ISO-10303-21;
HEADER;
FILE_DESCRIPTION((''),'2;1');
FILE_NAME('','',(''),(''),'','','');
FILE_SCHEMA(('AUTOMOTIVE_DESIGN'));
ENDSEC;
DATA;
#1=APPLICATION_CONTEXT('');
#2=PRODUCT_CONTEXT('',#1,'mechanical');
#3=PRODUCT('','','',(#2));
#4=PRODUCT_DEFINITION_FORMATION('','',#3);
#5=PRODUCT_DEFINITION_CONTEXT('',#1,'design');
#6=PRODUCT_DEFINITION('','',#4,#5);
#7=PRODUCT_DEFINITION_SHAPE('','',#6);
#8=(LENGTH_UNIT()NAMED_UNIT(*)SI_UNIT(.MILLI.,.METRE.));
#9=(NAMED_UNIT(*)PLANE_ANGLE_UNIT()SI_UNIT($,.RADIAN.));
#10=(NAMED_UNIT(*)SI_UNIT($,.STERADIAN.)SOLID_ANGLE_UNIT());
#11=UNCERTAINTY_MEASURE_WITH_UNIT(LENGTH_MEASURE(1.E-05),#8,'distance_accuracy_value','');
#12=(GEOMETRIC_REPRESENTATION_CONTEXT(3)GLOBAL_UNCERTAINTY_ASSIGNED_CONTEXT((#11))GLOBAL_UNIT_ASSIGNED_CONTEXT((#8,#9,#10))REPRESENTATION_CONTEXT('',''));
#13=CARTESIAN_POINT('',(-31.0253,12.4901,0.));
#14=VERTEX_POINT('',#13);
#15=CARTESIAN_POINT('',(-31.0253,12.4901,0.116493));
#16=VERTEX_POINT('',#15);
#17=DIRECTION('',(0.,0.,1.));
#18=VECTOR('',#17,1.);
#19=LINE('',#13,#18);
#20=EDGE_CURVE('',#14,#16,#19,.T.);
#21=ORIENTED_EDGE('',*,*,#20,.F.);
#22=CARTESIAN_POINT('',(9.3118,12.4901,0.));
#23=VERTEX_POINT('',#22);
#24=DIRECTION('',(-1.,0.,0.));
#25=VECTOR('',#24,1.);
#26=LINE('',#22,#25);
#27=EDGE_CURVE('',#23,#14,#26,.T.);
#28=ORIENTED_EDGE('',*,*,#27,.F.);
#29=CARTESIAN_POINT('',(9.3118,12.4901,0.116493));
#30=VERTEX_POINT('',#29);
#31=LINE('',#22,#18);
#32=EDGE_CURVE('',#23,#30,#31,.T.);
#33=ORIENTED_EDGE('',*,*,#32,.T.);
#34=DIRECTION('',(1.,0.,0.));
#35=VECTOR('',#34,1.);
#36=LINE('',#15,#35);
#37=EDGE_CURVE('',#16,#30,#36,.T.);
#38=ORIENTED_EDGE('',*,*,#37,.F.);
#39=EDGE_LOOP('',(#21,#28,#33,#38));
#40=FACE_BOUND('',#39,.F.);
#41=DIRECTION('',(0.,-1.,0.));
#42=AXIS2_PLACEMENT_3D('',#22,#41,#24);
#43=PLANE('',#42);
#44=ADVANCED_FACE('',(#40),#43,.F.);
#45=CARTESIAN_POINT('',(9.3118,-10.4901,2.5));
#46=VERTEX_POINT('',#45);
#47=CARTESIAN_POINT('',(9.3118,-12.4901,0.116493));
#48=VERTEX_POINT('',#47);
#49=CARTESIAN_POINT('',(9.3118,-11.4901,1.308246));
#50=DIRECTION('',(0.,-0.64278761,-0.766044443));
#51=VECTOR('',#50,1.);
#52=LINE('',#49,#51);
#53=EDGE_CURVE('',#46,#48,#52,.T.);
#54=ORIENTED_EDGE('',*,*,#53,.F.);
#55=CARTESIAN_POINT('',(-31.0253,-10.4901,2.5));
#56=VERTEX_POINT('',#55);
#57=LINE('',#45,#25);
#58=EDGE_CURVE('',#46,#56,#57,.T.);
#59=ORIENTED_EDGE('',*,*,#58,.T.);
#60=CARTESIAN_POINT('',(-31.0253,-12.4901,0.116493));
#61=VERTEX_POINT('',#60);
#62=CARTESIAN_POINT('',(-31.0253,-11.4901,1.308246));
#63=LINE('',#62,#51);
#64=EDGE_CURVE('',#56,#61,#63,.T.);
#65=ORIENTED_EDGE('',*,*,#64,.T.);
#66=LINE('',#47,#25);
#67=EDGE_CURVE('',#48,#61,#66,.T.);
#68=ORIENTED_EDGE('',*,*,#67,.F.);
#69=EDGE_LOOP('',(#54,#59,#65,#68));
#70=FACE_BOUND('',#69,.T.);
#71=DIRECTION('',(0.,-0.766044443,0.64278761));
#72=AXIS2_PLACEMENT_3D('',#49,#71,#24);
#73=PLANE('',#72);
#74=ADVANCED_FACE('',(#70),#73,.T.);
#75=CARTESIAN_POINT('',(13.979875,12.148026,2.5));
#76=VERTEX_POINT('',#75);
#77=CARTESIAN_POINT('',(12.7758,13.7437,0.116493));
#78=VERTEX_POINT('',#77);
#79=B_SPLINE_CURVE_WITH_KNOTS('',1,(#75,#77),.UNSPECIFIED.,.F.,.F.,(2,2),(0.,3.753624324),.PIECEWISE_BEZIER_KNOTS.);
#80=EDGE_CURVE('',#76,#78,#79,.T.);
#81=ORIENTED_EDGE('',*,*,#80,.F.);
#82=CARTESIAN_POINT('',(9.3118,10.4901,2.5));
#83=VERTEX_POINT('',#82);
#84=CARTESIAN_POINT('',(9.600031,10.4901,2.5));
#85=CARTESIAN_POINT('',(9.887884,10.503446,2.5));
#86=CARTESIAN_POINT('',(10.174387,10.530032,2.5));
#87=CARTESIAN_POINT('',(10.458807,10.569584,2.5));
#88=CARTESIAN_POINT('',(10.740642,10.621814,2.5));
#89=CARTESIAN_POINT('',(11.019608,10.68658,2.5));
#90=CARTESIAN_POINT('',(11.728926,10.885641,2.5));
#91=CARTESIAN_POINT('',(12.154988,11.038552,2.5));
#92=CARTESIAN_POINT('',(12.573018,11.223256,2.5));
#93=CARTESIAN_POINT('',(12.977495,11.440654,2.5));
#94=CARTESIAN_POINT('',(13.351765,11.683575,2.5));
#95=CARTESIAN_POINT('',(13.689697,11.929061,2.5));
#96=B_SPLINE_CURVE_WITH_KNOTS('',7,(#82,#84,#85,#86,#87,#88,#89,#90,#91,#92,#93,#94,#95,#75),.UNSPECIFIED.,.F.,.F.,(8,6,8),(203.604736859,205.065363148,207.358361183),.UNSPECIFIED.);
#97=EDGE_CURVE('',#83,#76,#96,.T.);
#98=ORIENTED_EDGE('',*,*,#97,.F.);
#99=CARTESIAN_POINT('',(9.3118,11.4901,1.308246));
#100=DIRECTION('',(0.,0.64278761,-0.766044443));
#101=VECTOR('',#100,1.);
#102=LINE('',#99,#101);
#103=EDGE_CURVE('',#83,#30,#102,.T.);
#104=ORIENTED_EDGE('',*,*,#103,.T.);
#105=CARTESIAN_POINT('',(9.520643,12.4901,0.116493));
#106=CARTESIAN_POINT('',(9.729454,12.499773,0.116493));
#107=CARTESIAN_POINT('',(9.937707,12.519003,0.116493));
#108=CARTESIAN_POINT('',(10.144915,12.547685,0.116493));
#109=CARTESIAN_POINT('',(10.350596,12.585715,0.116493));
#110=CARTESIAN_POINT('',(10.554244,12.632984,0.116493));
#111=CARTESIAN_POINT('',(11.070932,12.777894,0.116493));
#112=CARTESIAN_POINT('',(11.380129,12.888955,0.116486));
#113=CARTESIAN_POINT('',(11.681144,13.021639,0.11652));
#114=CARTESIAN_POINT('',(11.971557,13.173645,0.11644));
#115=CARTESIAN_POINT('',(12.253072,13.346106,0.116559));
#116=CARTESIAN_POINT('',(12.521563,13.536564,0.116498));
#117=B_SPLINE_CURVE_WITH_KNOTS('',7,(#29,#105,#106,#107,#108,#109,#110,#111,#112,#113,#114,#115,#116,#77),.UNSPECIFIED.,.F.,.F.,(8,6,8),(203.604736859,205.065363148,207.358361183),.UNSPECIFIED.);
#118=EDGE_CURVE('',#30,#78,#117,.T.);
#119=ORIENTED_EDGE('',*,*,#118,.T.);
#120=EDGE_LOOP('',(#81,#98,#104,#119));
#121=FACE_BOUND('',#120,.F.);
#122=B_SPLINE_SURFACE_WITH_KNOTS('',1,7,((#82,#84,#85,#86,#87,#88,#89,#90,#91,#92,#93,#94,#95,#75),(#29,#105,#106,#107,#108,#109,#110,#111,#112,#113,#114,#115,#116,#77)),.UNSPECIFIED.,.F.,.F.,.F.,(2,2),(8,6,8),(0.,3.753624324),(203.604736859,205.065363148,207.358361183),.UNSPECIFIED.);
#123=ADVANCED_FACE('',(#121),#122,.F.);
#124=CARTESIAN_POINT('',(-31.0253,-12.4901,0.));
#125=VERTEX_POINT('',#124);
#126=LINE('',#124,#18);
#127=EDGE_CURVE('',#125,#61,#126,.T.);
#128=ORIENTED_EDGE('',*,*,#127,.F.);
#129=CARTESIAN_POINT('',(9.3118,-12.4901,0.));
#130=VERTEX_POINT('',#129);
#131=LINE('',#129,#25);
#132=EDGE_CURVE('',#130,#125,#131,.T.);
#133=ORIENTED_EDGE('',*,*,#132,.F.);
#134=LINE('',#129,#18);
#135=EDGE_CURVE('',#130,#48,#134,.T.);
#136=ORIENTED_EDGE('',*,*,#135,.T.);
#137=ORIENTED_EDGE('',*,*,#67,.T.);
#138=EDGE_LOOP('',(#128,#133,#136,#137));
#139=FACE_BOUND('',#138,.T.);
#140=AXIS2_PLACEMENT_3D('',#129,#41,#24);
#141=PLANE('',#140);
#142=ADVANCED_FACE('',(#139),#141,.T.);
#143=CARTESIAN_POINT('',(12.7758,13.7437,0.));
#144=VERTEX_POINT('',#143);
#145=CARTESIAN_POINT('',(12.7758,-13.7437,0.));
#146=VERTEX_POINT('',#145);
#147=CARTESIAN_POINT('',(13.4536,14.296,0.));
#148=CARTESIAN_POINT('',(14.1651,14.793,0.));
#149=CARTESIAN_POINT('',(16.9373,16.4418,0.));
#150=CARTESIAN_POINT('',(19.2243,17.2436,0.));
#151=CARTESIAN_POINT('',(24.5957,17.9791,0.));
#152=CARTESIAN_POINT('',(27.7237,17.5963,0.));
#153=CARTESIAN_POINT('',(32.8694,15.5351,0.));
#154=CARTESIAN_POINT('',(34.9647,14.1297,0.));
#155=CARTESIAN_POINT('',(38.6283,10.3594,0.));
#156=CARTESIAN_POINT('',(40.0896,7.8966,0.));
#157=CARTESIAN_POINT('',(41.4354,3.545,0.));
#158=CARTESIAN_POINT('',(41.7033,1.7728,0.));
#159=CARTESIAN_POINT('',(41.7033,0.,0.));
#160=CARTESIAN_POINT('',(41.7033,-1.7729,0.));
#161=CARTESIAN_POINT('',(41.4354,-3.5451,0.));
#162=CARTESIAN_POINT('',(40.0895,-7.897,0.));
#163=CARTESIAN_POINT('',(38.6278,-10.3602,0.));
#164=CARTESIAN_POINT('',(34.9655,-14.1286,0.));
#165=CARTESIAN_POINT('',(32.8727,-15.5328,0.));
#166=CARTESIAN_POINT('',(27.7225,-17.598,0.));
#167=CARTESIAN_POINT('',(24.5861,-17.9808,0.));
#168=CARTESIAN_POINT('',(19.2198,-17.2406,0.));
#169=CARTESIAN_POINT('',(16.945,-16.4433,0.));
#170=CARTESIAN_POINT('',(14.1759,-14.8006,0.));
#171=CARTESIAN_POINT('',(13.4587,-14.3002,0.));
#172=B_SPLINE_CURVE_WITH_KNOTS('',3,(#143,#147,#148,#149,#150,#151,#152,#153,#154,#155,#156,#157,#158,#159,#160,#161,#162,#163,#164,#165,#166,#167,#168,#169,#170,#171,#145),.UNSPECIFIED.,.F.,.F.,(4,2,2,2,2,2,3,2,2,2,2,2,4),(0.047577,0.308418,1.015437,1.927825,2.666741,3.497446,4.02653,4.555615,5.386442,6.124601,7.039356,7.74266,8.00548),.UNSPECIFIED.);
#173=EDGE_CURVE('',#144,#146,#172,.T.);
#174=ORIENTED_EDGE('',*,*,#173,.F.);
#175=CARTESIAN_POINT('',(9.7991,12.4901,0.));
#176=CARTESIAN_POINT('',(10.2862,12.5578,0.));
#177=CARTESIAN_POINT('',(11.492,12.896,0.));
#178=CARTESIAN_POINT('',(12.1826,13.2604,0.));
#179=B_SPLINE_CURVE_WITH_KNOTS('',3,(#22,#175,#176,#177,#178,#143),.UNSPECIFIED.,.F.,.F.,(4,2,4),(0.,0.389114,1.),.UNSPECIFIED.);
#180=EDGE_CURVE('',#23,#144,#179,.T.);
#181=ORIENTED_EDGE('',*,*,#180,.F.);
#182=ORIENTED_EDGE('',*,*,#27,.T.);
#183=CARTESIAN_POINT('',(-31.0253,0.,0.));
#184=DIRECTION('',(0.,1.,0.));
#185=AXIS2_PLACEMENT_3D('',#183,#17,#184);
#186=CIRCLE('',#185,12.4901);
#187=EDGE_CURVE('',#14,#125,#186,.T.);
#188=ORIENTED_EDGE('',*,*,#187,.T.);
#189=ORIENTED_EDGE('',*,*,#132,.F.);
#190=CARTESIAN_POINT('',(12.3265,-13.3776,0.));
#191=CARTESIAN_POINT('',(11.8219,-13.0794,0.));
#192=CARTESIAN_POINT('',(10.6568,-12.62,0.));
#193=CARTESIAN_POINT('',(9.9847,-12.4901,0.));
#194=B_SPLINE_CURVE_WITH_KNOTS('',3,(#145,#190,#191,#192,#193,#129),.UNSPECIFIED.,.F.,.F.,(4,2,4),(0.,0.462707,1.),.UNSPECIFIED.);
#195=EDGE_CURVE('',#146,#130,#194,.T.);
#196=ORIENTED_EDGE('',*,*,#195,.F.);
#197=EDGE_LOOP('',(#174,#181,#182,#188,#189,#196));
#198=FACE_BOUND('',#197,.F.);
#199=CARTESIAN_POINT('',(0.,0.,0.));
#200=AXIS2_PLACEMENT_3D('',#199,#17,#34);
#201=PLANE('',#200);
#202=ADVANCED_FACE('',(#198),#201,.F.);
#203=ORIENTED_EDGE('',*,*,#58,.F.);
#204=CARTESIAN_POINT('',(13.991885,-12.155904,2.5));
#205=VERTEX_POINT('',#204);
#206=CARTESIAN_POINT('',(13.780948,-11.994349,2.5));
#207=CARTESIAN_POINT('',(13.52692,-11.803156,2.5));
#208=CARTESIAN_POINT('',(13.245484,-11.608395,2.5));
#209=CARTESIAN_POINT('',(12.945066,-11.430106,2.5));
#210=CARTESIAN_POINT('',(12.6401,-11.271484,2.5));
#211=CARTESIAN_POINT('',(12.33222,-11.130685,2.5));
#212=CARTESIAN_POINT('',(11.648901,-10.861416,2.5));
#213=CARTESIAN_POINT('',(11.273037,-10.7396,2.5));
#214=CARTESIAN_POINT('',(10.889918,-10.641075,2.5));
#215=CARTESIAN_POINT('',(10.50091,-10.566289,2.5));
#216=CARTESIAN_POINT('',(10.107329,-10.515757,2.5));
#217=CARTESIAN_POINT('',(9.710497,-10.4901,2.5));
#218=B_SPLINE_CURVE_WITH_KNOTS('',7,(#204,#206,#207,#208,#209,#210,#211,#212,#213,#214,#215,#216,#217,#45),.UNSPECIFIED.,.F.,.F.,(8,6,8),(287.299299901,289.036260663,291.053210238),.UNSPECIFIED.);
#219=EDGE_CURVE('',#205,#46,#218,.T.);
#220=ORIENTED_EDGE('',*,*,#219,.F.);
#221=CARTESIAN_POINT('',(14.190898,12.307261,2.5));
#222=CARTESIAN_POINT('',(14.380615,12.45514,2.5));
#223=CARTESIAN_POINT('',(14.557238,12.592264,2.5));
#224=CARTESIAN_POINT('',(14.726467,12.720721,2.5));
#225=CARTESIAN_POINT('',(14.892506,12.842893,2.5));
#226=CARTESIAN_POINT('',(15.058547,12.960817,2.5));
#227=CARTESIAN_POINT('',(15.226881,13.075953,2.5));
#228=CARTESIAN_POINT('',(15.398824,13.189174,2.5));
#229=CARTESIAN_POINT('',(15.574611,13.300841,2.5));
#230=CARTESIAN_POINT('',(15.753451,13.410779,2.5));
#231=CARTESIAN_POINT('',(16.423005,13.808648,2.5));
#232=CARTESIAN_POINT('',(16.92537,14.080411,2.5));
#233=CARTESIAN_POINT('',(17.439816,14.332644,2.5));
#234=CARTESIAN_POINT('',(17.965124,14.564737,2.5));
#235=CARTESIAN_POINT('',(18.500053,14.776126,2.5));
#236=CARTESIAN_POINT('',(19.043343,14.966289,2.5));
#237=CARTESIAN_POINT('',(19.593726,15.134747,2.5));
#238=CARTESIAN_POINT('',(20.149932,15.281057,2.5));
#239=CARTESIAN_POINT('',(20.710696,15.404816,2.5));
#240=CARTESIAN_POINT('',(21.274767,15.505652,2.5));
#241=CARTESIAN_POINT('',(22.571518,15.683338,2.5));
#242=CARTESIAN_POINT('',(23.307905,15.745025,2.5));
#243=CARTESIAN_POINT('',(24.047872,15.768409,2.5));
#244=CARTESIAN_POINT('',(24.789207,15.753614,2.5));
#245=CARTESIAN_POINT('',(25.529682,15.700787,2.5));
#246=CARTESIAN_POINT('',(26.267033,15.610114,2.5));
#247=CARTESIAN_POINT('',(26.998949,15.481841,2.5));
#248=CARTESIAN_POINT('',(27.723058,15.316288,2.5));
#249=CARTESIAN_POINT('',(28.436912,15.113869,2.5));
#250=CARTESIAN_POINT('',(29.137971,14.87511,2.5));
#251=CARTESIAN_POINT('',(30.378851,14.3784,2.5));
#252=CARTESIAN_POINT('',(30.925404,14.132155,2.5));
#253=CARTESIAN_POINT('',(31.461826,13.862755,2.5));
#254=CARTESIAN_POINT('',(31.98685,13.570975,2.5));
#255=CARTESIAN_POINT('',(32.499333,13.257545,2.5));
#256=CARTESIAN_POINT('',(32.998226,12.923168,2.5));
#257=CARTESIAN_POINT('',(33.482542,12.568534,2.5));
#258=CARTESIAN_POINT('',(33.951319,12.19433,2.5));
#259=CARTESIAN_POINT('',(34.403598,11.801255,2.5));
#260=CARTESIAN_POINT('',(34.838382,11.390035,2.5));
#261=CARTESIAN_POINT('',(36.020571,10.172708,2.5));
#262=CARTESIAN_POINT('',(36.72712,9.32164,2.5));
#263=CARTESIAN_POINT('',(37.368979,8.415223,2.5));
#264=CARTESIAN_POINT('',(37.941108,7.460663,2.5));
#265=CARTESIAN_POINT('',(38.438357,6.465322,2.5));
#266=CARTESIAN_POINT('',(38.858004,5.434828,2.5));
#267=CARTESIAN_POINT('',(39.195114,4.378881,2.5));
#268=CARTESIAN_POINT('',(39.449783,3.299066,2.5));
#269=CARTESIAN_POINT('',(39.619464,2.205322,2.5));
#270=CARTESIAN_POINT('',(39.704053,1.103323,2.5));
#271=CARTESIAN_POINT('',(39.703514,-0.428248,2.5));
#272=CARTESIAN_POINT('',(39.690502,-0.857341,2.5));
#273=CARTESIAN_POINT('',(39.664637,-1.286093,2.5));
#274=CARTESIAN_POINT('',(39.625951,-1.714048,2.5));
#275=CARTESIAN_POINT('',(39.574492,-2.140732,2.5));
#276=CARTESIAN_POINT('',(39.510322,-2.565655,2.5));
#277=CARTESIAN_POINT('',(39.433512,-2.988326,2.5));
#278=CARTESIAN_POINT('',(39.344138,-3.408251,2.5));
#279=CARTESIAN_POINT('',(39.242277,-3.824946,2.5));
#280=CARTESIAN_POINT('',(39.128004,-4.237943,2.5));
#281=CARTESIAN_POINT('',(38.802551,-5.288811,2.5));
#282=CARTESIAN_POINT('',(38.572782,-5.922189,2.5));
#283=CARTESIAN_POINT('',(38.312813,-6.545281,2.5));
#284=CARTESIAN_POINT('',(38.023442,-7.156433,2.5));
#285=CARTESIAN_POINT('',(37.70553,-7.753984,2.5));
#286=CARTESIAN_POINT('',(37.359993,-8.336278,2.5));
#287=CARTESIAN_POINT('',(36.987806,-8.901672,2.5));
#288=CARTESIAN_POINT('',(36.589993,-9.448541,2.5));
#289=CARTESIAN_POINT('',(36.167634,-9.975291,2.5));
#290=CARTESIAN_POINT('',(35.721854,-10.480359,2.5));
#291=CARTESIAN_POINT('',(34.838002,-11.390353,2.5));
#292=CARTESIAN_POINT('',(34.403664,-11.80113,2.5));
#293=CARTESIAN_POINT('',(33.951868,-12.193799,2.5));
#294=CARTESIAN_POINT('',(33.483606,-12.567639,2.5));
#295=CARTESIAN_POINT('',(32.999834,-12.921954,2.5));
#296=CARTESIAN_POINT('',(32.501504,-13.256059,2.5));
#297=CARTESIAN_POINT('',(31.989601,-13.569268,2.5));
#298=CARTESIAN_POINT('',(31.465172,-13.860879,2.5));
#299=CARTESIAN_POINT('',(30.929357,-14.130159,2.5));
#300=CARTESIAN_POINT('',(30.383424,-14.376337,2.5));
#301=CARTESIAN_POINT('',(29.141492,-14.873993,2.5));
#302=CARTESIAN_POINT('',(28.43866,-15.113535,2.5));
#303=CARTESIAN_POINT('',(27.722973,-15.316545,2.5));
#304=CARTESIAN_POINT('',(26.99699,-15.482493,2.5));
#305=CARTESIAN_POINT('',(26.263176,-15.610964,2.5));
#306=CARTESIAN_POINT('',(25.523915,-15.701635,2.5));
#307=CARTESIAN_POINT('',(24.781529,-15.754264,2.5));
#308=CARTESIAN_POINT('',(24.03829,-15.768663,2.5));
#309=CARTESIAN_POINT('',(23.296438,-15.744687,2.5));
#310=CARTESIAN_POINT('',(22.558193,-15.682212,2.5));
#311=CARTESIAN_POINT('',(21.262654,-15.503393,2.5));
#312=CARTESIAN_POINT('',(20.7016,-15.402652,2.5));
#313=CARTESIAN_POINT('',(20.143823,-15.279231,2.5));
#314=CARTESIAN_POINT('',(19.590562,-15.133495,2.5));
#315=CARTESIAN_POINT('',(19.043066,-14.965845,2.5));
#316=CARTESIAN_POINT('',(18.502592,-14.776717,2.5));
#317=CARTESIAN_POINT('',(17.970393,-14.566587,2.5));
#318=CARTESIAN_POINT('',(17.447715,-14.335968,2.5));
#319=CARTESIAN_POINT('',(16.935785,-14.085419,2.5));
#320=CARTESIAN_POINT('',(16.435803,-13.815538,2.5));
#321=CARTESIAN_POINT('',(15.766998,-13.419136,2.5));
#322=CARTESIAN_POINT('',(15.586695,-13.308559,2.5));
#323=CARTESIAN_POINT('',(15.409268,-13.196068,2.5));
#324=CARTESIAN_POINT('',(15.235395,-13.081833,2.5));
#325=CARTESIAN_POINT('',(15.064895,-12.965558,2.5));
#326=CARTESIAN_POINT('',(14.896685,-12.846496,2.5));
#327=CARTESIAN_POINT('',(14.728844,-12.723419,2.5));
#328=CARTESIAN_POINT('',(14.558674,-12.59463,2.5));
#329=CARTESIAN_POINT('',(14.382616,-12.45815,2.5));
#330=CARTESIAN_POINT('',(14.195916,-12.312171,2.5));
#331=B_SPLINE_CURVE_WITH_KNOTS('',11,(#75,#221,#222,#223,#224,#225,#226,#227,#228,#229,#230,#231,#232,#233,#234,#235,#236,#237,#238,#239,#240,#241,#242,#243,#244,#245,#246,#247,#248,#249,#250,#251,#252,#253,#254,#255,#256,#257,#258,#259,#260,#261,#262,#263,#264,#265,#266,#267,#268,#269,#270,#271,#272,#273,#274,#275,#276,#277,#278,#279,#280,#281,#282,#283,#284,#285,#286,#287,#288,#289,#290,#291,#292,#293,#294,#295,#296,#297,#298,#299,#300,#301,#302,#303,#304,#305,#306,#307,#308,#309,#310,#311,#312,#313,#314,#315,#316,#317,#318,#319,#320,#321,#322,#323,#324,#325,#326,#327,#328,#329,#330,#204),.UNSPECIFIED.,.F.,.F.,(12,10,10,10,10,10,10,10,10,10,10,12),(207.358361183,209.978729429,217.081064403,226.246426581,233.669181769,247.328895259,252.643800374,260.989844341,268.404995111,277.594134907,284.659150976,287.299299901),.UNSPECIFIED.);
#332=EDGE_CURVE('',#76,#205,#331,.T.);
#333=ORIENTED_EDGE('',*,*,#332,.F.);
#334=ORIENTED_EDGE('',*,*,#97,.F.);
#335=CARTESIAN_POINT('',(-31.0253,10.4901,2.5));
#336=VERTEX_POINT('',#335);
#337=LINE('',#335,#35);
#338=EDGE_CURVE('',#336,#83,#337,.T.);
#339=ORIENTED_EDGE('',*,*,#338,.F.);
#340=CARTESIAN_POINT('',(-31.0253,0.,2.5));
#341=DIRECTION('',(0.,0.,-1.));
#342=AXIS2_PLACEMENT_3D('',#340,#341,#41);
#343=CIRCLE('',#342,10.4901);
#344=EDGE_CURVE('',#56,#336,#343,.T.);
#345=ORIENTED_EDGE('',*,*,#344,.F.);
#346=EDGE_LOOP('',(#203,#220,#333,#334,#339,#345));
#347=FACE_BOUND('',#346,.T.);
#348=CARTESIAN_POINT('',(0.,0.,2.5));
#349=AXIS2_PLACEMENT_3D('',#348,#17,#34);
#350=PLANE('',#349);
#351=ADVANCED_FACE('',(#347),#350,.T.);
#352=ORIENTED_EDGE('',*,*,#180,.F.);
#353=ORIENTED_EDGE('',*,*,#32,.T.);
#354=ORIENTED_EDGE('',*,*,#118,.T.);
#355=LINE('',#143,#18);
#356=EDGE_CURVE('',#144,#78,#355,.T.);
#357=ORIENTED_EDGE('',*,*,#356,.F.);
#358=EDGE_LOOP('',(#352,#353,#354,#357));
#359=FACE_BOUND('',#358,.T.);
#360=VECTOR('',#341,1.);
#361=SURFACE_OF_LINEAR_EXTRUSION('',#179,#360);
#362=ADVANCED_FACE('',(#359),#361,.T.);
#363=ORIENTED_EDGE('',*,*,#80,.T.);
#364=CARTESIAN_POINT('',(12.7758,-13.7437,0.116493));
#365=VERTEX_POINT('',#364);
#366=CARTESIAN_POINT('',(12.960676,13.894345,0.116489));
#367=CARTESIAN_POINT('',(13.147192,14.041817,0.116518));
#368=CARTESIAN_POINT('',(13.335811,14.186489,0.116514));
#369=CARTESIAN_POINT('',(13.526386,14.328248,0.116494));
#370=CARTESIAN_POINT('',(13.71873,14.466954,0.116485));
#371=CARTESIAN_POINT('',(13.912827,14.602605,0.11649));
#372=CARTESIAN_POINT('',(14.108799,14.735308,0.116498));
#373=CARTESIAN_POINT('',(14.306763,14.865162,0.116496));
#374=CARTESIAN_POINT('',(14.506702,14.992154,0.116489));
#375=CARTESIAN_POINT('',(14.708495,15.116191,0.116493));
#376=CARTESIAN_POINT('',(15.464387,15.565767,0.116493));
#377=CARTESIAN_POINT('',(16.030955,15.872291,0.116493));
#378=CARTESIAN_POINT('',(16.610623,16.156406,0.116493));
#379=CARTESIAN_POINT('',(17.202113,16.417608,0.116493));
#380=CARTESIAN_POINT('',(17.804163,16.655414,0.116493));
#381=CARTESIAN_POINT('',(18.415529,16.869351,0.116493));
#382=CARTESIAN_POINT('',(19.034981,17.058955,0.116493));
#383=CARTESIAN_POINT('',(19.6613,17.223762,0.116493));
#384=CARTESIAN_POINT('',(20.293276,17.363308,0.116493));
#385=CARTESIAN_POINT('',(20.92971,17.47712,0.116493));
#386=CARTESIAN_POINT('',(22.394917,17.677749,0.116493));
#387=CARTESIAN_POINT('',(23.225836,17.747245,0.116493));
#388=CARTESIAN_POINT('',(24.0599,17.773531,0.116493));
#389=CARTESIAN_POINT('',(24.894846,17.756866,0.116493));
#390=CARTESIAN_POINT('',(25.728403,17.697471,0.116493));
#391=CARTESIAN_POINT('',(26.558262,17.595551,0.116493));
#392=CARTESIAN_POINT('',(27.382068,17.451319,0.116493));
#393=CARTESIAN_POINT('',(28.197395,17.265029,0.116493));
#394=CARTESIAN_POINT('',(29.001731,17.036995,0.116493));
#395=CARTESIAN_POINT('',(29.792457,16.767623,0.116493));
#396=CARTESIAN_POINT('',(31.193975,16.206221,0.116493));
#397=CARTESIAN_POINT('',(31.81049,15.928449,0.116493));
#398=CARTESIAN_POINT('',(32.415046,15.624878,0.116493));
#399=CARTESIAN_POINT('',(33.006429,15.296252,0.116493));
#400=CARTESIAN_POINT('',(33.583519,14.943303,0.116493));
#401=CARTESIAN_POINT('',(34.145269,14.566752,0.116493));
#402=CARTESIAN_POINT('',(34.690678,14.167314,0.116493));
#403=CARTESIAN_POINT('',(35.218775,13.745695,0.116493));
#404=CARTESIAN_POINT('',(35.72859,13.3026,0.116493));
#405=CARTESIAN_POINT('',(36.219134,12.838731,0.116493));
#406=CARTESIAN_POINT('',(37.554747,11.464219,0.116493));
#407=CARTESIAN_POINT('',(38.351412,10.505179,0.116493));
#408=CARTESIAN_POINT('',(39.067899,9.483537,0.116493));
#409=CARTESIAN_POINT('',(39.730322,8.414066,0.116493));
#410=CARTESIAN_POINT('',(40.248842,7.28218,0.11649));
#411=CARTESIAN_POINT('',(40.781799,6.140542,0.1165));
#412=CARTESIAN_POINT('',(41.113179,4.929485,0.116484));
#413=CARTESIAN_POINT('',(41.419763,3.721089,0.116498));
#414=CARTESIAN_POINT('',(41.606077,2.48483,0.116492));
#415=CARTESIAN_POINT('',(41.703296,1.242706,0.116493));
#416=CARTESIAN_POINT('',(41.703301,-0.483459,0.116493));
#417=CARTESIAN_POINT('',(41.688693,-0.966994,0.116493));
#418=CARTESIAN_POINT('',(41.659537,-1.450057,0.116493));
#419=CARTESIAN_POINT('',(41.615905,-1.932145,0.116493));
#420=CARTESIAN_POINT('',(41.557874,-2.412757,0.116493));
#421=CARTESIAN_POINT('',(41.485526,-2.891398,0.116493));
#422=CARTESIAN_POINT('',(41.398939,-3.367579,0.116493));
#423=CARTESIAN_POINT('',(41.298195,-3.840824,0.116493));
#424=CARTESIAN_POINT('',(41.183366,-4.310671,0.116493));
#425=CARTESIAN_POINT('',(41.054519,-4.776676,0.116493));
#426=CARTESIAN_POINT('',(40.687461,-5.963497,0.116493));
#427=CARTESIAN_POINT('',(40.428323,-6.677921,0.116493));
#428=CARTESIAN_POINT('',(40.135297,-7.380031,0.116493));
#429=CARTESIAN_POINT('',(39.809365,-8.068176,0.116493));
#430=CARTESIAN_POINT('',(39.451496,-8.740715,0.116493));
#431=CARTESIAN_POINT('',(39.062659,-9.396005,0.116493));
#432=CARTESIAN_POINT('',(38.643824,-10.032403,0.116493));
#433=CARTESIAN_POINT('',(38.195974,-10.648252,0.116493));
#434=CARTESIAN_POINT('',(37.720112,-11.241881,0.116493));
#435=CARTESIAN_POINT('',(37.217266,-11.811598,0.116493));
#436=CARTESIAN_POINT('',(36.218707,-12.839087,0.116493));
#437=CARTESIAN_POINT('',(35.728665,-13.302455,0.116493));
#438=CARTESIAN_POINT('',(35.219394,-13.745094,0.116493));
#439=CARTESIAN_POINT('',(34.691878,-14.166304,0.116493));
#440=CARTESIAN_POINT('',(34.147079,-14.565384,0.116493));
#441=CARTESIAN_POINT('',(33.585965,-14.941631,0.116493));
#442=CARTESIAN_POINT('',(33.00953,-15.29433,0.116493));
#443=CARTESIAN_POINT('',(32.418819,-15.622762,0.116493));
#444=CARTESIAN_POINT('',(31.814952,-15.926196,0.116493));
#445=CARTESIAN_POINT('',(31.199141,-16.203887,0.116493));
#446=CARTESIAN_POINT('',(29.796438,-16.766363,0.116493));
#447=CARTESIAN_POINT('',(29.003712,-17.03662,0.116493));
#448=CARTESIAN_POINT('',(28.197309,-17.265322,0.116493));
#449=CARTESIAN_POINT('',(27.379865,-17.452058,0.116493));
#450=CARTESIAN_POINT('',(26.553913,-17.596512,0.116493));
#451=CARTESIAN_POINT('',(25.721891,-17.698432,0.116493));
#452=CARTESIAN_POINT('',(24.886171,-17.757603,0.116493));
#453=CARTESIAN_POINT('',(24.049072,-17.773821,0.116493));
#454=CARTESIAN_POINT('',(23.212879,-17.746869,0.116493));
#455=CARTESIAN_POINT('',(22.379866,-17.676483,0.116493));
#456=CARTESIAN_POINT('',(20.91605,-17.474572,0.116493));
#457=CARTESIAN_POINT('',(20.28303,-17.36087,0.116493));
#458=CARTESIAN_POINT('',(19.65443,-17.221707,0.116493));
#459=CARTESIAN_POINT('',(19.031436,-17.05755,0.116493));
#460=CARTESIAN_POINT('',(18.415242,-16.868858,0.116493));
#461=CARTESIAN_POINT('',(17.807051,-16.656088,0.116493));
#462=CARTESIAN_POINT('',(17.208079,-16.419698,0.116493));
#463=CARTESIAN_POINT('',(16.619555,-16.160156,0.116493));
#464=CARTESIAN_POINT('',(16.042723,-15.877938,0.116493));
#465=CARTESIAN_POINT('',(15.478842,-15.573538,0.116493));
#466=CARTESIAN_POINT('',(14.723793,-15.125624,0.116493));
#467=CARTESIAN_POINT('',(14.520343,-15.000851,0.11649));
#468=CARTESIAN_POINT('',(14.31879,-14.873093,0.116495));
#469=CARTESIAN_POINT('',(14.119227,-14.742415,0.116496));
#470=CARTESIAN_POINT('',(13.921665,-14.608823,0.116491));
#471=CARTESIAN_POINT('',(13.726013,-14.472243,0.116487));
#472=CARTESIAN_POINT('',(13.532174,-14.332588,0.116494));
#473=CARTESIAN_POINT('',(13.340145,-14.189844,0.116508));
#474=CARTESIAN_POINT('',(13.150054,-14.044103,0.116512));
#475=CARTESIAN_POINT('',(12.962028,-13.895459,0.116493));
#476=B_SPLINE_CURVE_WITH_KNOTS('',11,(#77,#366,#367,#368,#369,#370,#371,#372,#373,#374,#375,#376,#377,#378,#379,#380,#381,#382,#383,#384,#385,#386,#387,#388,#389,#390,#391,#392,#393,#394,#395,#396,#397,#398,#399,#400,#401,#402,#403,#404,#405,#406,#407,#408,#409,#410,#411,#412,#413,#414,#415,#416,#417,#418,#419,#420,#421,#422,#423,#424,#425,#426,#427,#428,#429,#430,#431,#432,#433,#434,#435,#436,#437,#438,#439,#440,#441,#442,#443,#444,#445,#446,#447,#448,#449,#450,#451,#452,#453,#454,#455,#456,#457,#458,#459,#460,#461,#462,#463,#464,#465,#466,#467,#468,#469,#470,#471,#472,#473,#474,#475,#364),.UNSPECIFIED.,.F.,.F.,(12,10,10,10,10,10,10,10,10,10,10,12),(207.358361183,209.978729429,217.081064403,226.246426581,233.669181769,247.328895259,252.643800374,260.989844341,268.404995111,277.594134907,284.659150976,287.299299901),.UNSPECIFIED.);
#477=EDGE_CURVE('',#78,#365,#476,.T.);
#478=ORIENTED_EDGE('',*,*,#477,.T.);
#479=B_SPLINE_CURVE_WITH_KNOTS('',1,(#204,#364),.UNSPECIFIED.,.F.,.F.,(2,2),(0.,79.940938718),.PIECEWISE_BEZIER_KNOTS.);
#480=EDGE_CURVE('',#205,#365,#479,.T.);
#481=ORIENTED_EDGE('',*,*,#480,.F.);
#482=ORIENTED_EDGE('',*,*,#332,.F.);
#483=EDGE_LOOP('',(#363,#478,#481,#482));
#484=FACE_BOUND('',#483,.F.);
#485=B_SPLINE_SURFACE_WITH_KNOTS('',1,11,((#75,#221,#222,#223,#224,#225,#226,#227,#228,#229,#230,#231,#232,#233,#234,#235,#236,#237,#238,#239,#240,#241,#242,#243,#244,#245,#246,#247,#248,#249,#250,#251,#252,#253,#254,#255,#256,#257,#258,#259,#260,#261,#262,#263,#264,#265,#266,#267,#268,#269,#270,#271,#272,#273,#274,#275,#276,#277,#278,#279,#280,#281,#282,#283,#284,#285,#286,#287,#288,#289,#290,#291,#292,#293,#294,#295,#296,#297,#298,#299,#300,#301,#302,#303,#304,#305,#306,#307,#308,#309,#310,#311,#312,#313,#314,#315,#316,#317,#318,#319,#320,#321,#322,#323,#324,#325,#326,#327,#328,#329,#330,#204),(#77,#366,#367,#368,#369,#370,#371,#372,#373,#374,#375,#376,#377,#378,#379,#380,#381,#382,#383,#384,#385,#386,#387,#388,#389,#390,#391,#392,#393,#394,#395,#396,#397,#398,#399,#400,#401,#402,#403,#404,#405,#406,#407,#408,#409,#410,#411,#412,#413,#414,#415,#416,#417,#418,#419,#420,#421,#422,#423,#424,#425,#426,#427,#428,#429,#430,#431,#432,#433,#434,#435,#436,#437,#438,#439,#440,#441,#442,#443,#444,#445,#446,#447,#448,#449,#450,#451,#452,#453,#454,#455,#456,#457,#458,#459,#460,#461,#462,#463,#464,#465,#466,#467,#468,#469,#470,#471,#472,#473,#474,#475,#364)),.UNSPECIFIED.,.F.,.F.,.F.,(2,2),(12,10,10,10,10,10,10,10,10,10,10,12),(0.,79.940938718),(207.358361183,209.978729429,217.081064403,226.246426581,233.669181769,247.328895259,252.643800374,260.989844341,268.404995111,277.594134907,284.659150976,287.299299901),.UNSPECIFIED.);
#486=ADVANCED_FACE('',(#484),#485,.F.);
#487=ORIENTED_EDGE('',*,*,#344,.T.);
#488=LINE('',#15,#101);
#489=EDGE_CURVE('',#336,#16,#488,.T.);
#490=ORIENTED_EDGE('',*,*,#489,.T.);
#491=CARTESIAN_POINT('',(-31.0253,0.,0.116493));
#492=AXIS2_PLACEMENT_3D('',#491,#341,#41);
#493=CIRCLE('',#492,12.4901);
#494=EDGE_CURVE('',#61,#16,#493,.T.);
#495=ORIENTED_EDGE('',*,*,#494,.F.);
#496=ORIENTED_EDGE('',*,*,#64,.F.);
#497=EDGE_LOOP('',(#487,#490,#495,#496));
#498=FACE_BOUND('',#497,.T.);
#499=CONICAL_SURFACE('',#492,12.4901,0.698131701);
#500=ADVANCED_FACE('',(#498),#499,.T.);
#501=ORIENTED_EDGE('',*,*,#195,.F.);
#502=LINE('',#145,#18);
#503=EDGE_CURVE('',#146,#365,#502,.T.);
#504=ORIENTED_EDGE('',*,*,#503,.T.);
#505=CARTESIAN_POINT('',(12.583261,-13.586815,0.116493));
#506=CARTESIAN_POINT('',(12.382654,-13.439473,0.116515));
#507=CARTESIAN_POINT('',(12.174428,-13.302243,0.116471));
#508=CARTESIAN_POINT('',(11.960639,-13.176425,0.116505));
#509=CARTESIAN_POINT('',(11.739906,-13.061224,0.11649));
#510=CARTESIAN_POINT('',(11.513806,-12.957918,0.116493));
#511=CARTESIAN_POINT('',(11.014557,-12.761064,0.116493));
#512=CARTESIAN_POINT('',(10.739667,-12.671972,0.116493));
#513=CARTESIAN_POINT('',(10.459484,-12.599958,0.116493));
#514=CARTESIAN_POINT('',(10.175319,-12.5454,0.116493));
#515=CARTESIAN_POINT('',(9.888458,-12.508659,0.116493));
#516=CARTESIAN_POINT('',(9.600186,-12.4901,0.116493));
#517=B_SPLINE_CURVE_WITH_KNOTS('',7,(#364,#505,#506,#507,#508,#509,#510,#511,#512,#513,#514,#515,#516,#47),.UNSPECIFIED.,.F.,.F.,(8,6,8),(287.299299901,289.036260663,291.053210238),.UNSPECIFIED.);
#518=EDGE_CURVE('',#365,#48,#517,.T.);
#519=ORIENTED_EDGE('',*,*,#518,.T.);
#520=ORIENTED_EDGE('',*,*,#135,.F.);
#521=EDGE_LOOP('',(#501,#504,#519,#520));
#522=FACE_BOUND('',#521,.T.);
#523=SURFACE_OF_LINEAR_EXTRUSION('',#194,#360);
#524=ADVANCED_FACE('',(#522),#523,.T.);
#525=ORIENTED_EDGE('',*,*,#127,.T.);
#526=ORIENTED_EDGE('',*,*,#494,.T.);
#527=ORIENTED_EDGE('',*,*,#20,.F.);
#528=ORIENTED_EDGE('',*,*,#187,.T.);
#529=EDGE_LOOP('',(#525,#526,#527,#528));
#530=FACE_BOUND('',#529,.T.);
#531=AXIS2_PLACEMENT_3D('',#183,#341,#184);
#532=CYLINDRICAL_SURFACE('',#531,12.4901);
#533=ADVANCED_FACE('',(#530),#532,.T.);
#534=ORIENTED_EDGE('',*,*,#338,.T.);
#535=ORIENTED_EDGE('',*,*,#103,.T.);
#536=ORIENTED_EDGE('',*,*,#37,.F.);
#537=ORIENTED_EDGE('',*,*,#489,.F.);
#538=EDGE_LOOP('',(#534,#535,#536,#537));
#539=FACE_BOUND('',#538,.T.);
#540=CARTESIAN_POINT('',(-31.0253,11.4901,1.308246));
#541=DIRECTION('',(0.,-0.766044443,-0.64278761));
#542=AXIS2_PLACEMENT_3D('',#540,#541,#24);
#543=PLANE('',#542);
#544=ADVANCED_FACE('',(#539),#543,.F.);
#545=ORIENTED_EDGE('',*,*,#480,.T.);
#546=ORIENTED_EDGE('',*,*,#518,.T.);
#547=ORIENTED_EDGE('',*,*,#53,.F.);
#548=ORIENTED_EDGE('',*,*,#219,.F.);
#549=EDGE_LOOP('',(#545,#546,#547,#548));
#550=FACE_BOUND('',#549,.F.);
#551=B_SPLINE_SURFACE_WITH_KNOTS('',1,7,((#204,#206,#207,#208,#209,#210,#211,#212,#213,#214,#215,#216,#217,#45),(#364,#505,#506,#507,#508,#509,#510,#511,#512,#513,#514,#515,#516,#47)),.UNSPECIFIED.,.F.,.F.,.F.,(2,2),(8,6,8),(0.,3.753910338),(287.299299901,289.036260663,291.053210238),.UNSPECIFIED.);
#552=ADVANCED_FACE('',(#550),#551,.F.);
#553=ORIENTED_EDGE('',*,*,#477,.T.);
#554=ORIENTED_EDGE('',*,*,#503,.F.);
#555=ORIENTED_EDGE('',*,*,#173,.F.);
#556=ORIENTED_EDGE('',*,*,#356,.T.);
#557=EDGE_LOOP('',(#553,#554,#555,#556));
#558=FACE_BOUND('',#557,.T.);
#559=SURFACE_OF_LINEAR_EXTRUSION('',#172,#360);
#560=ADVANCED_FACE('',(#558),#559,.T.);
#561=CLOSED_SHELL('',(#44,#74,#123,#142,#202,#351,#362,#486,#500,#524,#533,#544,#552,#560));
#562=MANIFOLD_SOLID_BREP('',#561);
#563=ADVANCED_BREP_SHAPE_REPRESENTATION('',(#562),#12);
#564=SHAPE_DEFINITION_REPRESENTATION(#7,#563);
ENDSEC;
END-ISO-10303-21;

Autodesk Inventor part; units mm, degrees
ref_plane "YZ Plane" through (0, 0, 0) normal (1, 0, 0) x (0, 1, 0)
ref_plane "XZ Plane" through (0, 0, 0) normal (0, 1, 0) x (-1, 0, 0)
ref_plane "XY Plane" through (0, 0, 0) normal (0, 0, 1) x (1, 0, 0)
sketch "Sketch1" plane through (0, 0, 0) normal (0, 0, 1) x (1, 0, 0)
  spline S0 degree 3 poles (12.7758, 13.7437) (13.4536, 14.296) (14.1651, 14.793) (16.9373, 16.4418) (19.2243, 17.2436) (24.5957, 17.9791) (27.7237, 17.5963) (32.8694, 15.5351) (34.9647, 14.1297) (38.6283, 10.3594) (40.0896, 7.8966) (41.4354, 3.545) (41.7033, 1.7728) (41.7033, 0) (41.7033, -1.7729) (41.4354, -3.5451) (40.0895, -7.897) (38.6278, -10.3602) (34.9655, -14.1286) (32.8727, -15.5328) (27.7225, -17.598) (24.5861, -17.9808) (19.2198, -17.2406) (16.945, -16.4433) (14.1759, -14.8006) (13.4587, -14.3002) (12.7758, -13.7437) knots 0.047577 0.047577 0.047577 0.047577 0.308418 0.308418 1.015437 1.015437 1.927825 1.927825 2.666741 2.666741 3.497446 3.497446 4.02653 4.02653 4.02653 4.555615 4.555615 5.386442 5.386442 6.124601 6.124601 7.039356 7.039356 7.74266 7.74266 8.00548 8.00548 8.00548 8.00548 weights 1 1 1 1 1 1 1 1 1 1 1 1 1 1 1 1 1 1 1 1 1 1 1 1 1 1 1
  spline S1 degree 3 poles (12.7758, -13.7437) (12.3265, -13.3776) (11.8219, -13.0794) (10.6568, -12.62) (9.9847, -12.4901) (9.3118, -12.4901) knots 0 0 0 0 0.462707 0.462707 1 1 1 1 weights 1 1 1 1 1 1
  line L0 (9.3118, -12.4901) -> (-31.0253, -12.4901)
  spline S2 degree 3 poles (9.3118, 12.4901) (9.7991, 12.4901) (10.2862, 12.5578) (11.492, 12.896) (12.1826, 13.2604) (12.7758, 13.7437) knots 0 0 0 0 0.389114 0.389114 1 1 1 1 weights 1 1 1 1 1 1
  line L1 (0, 0) -> (-42.2873, 0) construction
  line L2 (9.3118, 12.4901) -> (-31.0253, 12.4901)
  arc A0 (-31.0253, 12.4901) -> (-31.0253, -12.4901) centre (-31.0253, 0) ccw
extrude "Extrusion1" add sketch "Sketch1" along normal blind 2.5
chamfer "Chamfer1" distance 2 angle 50 6 edges at (41.7033, 0, 2.5) (11.1518, -12.8172, 2.5) (-10.8568, -12.4901, 2.5) (-43.5155, 0, 2.5) (-10.8568, 12.4901, 2.5) (11.1517, 12.8172, 2.5) measured on face at (-4.1339, -4.1634, 2.5)
sketch "Sketch6" plane through (0, 0, 2.5) normal (0, 0, 1) x (1, 0, 0)
  line L0 (-9.5253, -2.5425) -> (-15.3564, -2.5425) construction
  line L1 (-15.3564, -2.5425) -> (-15.3564, 2.5425) construction
  line L2 (-15.3564, 2.5425) -> (-9.5253, 2.5425) construction
  line L3 (-9.5253, 2.5425) -> (-9.5253, -2.5425) construction
  point P0 (0, 0)
  point P1 (-6.2263, 0)
decal "Decal1"
ref_plane "Work Plane1" through (0, 0, 0) normal (0.2164396, 0, 0.976296) x (0, 1, 0)
sketch "Sketch7" plane through (0, 0, 0) normal (0.2164396, 0, 0.976296) x (0, 1, 0)
  point P0 (0, 0)
ref_plane "Work Plane2" through (0, 0, 0) normal (0.2164396, 0, 0.976296) x (0, 1, 0)
properties part number "gornji shiny dio"
